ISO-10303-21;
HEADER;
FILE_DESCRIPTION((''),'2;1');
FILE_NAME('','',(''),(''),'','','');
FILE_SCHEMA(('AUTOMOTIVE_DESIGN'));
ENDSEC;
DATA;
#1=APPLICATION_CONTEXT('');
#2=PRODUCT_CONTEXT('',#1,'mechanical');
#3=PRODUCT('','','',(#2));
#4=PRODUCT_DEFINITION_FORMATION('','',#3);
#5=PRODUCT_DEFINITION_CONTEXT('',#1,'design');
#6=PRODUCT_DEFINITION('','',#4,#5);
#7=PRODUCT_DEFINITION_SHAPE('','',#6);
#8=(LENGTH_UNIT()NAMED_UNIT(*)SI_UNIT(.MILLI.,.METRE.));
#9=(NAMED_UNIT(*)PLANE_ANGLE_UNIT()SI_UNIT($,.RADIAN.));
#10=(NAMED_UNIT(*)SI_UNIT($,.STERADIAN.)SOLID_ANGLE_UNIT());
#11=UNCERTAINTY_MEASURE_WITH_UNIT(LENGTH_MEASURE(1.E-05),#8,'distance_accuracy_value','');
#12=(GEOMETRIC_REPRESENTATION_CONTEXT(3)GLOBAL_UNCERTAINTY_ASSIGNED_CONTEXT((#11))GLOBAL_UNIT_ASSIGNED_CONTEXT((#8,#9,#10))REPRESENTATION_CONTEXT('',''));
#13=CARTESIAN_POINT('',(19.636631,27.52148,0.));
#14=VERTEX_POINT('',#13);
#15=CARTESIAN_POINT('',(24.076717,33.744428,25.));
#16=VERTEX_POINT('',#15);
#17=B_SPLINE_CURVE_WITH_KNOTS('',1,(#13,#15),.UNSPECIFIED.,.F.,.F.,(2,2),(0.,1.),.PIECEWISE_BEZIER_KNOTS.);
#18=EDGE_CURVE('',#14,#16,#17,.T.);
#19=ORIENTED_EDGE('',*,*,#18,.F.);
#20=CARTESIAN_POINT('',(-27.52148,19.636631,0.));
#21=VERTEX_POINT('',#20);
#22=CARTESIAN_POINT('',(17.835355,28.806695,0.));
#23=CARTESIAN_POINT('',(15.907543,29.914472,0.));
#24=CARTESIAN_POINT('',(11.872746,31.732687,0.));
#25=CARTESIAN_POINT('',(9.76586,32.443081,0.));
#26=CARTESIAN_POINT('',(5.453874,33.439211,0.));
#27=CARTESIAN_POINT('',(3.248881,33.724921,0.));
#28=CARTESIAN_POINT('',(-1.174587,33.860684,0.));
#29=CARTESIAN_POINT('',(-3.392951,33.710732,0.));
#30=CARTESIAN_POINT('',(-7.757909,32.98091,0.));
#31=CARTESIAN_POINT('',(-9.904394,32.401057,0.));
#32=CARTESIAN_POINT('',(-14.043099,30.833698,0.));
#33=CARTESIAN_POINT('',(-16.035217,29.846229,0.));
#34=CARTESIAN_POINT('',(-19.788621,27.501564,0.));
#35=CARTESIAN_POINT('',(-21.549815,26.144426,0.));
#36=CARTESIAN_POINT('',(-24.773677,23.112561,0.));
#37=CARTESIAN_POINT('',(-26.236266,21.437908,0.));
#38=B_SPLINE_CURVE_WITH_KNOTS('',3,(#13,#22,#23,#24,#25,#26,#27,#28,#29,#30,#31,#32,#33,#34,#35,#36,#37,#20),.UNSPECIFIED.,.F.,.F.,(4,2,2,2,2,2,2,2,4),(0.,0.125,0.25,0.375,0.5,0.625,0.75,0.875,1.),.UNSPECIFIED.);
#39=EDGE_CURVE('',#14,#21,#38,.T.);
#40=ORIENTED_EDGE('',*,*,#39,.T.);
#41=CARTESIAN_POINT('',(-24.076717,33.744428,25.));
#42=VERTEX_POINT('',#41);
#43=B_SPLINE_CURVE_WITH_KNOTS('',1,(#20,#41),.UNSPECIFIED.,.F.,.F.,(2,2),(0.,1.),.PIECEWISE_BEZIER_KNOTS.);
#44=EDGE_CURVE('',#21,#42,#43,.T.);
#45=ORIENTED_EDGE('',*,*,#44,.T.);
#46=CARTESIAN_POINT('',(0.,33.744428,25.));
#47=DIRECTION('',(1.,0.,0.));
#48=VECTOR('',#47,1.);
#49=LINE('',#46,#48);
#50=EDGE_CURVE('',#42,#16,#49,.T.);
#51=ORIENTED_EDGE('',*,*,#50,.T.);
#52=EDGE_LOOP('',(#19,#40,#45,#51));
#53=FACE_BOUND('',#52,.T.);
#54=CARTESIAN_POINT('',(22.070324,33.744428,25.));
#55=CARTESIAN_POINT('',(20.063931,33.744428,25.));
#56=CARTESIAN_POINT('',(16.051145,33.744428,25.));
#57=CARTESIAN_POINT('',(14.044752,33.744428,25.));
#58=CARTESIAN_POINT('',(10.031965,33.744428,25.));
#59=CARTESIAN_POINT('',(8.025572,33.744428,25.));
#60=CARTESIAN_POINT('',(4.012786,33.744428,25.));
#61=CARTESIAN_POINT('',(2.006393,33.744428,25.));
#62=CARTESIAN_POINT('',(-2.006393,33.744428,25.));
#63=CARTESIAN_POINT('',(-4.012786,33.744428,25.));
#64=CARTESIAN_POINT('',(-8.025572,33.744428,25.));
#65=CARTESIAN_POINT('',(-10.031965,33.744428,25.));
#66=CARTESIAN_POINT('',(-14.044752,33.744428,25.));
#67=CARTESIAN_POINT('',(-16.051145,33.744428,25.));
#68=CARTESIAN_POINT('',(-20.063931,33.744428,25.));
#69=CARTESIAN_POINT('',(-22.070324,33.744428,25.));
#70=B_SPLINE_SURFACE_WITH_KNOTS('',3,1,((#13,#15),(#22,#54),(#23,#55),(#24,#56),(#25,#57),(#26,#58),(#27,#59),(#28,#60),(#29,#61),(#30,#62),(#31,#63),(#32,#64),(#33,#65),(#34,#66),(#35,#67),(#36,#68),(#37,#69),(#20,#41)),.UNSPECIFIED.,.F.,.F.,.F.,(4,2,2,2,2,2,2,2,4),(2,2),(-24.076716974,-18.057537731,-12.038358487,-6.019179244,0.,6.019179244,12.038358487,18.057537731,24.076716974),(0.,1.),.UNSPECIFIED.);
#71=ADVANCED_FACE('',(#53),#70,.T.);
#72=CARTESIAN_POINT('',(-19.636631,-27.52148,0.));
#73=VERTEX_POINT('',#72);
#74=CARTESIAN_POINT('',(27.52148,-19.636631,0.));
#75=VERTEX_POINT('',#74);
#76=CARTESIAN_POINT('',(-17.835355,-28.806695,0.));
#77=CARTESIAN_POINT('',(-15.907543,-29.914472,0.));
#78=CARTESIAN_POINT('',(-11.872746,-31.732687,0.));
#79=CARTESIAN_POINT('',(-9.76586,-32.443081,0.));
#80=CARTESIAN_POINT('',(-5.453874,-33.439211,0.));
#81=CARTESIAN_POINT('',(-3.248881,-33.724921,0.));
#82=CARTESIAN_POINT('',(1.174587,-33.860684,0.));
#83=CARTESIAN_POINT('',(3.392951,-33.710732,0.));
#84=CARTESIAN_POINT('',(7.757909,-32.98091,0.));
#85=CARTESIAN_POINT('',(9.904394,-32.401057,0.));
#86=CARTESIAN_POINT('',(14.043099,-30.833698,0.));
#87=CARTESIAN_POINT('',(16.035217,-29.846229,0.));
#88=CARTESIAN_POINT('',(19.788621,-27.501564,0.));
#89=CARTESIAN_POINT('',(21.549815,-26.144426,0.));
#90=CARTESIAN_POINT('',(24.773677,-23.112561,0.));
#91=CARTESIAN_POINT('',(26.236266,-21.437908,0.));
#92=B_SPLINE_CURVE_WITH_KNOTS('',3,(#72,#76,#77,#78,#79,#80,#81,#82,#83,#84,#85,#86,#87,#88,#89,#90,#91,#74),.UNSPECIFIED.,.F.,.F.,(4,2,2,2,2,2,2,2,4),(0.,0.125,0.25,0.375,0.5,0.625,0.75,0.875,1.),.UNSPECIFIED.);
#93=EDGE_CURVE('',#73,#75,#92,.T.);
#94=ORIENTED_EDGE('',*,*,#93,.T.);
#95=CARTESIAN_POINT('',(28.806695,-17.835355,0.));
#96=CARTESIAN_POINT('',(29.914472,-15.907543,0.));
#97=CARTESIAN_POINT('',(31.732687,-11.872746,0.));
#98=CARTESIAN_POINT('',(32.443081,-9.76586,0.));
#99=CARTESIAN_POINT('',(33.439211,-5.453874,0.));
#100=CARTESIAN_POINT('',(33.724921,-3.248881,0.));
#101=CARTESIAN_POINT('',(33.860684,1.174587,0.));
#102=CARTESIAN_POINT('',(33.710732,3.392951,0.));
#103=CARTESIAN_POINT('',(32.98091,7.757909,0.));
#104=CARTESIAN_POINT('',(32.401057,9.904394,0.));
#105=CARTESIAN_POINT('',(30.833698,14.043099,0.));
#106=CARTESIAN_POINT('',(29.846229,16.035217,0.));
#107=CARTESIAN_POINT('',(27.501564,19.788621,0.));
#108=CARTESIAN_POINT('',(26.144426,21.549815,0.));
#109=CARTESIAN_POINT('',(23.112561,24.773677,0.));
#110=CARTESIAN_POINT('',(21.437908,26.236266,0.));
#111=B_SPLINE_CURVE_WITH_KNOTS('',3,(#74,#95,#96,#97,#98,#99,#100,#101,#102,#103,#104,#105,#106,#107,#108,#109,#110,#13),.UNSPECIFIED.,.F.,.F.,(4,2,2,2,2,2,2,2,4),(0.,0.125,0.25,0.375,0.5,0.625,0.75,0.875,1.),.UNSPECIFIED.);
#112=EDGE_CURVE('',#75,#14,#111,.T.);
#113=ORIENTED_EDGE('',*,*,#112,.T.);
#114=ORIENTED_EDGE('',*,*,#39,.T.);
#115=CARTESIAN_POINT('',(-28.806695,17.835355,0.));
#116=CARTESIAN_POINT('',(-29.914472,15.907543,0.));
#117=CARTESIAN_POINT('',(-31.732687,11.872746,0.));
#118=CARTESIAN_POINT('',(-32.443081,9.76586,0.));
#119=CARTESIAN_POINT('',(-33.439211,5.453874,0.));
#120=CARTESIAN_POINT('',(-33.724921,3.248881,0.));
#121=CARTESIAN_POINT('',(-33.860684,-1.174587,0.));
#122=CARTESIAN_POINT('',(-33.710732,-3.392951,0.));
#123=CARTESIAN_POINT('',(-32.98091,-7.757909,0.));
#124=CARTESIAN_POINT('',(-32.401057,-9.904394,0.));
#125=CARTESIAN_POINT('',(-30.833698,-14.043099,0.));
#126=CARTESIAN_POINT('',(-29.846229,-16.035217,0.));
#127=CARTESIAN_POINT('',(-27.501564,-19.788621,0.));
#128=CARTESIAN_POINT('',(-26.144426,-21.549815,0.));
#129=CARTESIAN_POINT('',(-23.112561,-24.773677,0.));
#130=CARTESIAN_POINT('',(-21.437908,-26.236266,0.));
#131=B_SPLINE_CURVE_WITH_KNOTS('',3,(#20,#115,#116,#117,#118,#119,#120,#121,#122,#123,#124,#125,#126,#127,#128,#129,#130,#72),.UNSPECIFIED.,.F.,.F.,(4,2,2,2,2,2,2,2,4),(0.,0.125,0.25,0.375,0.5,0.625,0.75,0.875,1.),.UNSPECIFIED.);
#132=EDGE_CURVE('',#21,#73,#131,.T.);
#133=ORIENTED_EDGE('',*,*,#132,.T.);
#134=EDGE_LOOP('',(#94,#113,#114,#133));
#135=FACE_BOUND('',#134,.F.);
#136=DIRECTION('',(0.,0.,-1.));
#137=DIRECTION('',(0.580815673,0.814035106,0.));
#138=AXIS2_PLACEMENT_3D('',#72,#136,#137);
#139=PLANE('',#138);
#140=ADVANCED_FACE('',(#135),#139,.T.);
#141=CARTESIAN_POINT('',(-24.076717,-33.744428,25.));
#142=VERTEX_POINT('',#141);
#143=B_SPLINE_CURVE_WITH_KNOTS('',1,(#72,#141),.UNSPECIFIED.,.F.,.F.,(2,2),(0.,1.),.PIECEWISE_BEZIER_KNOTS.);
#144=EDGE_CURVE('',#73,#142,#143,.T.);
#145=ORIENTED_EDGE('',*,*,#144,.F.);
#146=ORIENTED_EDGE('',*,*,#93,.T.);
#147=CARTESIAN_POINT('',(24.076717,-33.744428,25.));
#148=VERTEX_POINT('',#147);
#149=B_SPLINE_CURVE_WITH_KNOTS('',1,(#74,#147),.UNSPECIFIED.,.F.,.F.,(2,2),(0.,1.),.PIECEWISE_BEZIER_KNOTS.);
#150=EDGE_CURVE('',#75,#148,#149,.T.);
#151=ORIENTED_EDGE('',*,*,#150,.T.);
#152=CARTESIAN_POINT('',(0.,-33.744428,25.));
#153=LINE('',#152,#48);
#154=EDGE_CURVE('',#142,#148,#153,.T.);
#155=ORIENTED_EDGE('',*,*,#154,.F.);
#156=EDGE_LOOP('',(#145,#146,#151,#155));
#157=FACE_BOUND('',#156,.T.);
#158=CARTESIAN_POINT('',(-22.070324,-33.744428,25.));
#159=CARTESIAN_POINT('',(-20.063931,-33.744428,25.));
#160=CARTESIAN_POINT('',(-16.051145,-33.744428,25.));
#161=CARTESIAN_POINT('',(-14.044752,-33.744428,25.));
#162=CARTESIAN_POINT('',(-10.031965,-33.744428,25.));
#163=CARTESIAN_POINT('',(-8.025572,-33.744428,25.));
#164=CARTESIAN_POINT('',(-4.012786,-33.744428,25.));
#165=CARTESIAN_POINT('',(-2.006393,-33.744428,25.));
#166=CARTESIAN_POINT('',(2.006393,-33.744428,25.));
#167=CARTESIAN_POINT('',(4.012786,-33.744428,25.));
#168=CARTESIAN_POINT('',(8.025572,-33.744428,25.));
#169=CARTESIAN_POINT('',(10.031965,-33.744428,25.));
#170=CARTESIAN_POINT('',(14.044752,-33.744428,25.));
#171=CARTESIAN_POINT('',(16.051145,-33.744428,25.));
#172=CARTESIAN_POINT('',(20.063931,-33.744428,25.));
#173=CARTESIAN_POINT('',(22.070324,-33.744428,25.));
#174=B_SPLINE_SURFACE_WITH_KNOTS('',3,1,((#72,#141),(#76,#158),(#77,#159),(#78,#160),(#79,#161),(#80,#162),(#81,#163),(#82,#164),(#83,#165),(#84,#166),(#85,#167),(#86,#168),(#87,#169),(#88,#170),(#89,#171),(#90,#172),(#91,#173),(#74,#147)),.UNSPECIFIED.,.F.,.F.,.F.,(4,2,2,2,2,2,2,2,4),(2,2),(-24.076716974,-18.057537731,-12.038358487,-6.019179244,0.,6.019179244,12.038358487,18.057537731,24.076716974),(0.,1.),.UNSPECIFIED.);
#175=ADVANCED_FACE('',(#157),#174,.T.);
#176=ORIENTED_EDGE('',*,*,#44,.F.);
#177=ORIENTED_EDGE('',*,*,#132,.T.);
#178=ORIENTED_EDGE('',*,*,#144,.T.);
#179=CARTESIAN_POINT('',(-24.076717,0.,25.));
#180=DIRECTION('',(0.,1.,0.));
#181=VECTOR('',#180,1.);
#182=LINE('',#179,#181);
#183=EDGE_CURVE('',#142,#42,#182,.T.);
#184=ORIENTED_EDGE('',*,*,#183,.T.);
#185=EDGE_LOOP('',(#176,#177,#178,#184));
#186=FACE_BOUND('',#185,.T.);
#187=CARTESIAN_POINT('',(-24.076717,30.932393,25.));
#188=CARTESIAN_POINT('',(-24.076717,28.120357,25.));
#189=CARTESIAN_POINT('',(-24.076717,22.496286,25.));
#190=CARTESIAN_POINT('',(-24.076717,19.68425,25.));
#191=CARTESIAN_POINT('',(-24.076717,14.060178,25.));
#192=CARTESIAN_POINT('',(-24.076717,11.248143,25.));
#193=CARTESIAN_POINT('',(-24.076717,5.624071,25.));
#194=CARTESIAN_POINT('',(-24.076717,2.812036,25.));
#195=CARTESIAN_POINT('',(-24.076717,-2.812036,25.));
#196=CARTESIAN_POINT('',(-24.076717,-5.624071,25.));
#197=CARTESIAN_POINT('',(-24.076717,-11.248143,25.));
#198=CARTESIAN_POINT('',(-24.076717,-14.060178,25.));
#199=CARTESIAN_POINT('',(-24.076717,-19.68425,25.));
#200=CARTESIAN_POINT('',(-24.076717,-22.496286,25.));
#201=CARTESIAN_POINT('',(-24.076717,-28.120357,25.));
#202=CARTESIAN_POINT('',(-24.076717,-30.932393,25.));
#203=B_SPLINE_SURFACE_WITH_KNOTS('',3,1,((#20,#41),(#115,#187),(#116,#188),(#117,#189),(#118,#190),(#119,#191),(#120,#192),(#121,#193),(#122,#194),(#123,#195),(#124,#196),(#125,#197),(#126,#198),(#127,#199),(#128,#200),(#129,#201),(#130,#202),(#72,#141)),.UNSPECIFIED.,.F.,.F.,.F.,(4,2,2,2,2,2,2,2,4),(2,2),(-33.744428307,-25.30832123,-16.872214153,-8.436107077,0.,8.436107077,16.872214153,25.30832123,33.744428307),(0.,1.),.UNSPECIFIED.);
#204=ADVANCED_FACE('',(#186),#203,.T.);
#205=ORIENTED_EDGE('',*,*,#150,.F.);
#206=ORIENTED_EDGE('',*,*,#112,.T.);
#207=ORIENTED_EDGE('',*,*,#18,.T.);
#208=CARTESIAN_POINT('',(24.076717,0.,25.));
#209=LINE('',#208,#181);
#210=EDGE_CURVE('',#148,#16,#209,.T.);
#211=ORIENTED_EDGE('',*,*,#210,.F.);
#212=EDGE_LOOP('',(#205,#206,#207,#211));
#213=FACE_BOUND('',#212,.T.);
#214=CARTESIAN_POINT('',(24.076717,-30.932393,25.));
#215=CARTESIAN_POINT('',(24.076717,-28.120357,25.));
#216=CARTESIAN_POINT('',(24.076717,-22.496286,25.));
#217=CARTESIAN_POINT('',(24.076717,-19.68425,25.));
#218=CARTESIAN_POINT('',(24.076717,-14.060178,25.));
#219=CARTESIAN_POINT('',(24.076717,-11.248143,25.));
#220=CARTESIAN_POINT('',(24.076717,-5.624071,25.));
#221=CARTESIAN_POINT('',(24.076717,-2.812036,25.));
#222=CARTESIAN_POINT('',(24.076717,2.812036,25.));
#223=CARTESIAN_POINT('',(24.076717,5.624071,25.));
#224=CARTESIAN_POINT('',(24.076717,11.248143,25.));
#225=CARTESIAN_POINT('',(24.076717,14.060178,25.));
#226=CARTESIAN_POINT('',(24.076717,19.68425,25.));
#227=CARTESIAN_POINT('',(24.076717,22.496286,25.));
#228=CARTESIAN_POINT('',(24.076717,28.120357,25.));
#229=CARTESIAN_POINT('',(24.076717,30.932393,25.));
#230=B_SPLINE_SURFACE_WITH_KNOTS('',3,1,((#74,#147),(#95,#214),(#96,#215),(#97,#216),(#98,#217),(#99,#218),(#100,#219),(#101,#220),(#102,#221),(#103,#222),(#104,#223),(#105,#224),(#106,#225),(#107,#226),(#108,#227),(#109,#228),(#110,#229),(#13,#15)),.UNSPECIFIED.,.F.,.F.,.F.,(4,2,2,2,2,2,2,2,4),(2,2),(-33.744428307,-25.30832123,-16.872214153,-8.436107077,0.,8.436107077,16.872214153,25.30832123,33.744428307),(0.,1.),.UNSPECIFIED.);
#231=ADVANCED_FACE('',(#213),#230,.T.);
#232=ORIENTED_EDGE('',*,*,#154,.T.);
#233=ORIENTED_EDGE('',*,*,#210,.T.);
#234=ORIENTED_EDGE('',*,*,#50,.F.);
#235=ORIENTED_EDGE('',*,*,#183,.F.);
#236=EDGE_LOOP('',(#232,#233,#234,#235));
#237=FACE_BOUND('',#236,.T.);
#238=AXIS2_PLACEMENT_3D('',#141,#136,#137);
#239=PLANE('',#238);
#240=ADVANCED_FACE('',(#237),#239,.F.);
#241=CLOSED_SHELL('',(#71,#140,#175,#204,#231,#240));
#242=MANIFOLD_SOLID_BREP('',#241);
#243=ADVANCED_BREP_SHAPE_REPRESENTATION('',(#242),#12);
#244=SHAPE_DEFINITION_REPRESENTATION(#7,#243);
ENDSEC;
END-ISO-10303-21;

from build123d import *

# Parameters (mm, degrees)
F2_W = 48.1534339488
F2_H = 67.4888566136


# Not quite as in the source:
# - the arcs of a loft's sections are written as splines that run evenly, so that the points pair up as in the source's solid


with BuildPart() as f3:
    # F0 (on Top) → F3 section 0
    with BuildSketch(Plane.XY):
        with BuildLine():
            add(Edge.make_bspline(
                [(-19.6366312529, -27.5214804497), (-17.8353545697, -28.8066949598), (-15.9075429758, -29.9144718089), (-11.8727458368, -31.7326874599), (-9.7658600599, -32.4430813028), (-5.4538741397, -33.4392105768), (-3.2488806187, -33.7249213766), (1.174586882, -33.8606835842), (3.3929514827, -33.710731635), (7.7579091885, -32.9809095107), (9.9043943614, -32.4010573819), (14.0430993957, -30.8336975806), (16.0352169193, -29.8462286643), (19.7886211685, -27.5015639443), (21.5498150836, -26.1444261171), (24.7736773273, -23.1125606286), (26.2362659395, -21.4379079362), (27.5214804497, -19.6366312529)],
                knots=[0, 0, 0, 0, 0.125, 0.125, 0.25, 0.25, 0.375, 0.375, 0.5, 0.5, 0.625, 0.625, 0.75, 0.75, 0.875, 0.875, 1, 1, 1, 1], degree=3))
            add(Edge.make_bspline(
                [(27.5214804497, -19.6366312529), (28.8066949598, -17.8353545697), (29.9144718089, -15.9075429758), (31.7326874599, -11.8727458368), (32.4430813028, -9.7658600599), (33.4392105768, -5.4538741397), (33.7249213766, -3.2488806187), (33.8606835842, 1.174586882), (33.710731635, 3.3929514827), (32.9809095107, 7.7579091885), (32.4010573819, 9.9043943614), (30.8336975806, 14.0430993957), (29.8462286643, 16.0352169193), (27.5015639443, 19.7886211685), (26.1444261171, 21.5498150836), (23.1125606286, 24.7736773273), (21.4379079362, 26.2362659395), (19.6366312529, 27.5214804497)],
                knots=[0, 0, 0, 0, 0.125, 0.125, 0.25, 0.25, 0.375, 0.375, 0.5, 0.5, 0.625, 0.625, 0.75, 0.75, 0.875, 0.875, 1, 1, 1, 1], degree=3))
            add(Edge.make_bspline(
                [(19.6366312529, 27.5214804497), (17.8353545697, 28.8066949598), (15.9075429758, 29.9144718089), (11.8727458368, 31.7326874599), (9.7658600599, 32.4430813028), (5.4538741397, 33.4392105768), (3.2488806187, 33.7249213766), (-1.174586882, 33.8606835842), (-3.3929514827, 33.710731635), (-7.7579091885, 32.9809095107), (-9.9043943614, 32.4010573819), (-14.0430993957, 30.8336975806), (-16.0352169193, 29.8462286643), (-19.7886211685, 27.5015639443), (-21.5498150836, 26.1444261171), (-24.7736773273, 23.1125606286), (-26.2362659395, 21.4379079362), (-27.5214804497, 19.6366312529)],
                knots=[0, 0, 0, 0, 0.125, 0.125, 0.25, 0.25, 0.375, 0.375, 0.5, 0.5, 0.625, 0.625, 0.75, 0.75, 0.875, 0.875, 1, 1, 1, 1], degree=3))
            add(Edge.make_bspline(
                [(-27.5214804497, 19.6366312529), (-28.8066949598, 17.8353545697), (-29.9144718089, 15.9075429758), (-31.7326874599, 11.8727458368), (-32.4430813028, 9.7658600599), (-33.4392105768, 5.4538741397), (-33.7249213766, 3.2488806187), (-33.8606835842, -1.174586882), (-33.710731635, -3.3929514827), (-32.9809095107, -7.7579091885), (-32.4010573819, -9.9043943614), (-30.8336975806, -14.0430993957), (-29.8462286643, -16.0352169193), (-27.5015639443, -19.7886211685), (-26.1444261171, -21.5498150836), (-23.1125606286, -24.7736773273), (-21.4379079362, -26.2362659395), (-19.6366312529, -27.5214804497)],
                knots=[0, 0, 0, 0, 0.125, 0.125, 0.25, 0.25, 0.375, 0.375, 0.5, 0.5, 0.625, 0.625, 0.75, 0.75, 0.875, 0.875, 1, 1, 1, 1], degree=3))
        make_face()
    # F2 (on offset) → F3 section 1
    with BuildSketch(Plane.XY.offset(25)):
        Rectangle(F2_W, F2_H)
    loft(ruled=True)


solid = f3.part
